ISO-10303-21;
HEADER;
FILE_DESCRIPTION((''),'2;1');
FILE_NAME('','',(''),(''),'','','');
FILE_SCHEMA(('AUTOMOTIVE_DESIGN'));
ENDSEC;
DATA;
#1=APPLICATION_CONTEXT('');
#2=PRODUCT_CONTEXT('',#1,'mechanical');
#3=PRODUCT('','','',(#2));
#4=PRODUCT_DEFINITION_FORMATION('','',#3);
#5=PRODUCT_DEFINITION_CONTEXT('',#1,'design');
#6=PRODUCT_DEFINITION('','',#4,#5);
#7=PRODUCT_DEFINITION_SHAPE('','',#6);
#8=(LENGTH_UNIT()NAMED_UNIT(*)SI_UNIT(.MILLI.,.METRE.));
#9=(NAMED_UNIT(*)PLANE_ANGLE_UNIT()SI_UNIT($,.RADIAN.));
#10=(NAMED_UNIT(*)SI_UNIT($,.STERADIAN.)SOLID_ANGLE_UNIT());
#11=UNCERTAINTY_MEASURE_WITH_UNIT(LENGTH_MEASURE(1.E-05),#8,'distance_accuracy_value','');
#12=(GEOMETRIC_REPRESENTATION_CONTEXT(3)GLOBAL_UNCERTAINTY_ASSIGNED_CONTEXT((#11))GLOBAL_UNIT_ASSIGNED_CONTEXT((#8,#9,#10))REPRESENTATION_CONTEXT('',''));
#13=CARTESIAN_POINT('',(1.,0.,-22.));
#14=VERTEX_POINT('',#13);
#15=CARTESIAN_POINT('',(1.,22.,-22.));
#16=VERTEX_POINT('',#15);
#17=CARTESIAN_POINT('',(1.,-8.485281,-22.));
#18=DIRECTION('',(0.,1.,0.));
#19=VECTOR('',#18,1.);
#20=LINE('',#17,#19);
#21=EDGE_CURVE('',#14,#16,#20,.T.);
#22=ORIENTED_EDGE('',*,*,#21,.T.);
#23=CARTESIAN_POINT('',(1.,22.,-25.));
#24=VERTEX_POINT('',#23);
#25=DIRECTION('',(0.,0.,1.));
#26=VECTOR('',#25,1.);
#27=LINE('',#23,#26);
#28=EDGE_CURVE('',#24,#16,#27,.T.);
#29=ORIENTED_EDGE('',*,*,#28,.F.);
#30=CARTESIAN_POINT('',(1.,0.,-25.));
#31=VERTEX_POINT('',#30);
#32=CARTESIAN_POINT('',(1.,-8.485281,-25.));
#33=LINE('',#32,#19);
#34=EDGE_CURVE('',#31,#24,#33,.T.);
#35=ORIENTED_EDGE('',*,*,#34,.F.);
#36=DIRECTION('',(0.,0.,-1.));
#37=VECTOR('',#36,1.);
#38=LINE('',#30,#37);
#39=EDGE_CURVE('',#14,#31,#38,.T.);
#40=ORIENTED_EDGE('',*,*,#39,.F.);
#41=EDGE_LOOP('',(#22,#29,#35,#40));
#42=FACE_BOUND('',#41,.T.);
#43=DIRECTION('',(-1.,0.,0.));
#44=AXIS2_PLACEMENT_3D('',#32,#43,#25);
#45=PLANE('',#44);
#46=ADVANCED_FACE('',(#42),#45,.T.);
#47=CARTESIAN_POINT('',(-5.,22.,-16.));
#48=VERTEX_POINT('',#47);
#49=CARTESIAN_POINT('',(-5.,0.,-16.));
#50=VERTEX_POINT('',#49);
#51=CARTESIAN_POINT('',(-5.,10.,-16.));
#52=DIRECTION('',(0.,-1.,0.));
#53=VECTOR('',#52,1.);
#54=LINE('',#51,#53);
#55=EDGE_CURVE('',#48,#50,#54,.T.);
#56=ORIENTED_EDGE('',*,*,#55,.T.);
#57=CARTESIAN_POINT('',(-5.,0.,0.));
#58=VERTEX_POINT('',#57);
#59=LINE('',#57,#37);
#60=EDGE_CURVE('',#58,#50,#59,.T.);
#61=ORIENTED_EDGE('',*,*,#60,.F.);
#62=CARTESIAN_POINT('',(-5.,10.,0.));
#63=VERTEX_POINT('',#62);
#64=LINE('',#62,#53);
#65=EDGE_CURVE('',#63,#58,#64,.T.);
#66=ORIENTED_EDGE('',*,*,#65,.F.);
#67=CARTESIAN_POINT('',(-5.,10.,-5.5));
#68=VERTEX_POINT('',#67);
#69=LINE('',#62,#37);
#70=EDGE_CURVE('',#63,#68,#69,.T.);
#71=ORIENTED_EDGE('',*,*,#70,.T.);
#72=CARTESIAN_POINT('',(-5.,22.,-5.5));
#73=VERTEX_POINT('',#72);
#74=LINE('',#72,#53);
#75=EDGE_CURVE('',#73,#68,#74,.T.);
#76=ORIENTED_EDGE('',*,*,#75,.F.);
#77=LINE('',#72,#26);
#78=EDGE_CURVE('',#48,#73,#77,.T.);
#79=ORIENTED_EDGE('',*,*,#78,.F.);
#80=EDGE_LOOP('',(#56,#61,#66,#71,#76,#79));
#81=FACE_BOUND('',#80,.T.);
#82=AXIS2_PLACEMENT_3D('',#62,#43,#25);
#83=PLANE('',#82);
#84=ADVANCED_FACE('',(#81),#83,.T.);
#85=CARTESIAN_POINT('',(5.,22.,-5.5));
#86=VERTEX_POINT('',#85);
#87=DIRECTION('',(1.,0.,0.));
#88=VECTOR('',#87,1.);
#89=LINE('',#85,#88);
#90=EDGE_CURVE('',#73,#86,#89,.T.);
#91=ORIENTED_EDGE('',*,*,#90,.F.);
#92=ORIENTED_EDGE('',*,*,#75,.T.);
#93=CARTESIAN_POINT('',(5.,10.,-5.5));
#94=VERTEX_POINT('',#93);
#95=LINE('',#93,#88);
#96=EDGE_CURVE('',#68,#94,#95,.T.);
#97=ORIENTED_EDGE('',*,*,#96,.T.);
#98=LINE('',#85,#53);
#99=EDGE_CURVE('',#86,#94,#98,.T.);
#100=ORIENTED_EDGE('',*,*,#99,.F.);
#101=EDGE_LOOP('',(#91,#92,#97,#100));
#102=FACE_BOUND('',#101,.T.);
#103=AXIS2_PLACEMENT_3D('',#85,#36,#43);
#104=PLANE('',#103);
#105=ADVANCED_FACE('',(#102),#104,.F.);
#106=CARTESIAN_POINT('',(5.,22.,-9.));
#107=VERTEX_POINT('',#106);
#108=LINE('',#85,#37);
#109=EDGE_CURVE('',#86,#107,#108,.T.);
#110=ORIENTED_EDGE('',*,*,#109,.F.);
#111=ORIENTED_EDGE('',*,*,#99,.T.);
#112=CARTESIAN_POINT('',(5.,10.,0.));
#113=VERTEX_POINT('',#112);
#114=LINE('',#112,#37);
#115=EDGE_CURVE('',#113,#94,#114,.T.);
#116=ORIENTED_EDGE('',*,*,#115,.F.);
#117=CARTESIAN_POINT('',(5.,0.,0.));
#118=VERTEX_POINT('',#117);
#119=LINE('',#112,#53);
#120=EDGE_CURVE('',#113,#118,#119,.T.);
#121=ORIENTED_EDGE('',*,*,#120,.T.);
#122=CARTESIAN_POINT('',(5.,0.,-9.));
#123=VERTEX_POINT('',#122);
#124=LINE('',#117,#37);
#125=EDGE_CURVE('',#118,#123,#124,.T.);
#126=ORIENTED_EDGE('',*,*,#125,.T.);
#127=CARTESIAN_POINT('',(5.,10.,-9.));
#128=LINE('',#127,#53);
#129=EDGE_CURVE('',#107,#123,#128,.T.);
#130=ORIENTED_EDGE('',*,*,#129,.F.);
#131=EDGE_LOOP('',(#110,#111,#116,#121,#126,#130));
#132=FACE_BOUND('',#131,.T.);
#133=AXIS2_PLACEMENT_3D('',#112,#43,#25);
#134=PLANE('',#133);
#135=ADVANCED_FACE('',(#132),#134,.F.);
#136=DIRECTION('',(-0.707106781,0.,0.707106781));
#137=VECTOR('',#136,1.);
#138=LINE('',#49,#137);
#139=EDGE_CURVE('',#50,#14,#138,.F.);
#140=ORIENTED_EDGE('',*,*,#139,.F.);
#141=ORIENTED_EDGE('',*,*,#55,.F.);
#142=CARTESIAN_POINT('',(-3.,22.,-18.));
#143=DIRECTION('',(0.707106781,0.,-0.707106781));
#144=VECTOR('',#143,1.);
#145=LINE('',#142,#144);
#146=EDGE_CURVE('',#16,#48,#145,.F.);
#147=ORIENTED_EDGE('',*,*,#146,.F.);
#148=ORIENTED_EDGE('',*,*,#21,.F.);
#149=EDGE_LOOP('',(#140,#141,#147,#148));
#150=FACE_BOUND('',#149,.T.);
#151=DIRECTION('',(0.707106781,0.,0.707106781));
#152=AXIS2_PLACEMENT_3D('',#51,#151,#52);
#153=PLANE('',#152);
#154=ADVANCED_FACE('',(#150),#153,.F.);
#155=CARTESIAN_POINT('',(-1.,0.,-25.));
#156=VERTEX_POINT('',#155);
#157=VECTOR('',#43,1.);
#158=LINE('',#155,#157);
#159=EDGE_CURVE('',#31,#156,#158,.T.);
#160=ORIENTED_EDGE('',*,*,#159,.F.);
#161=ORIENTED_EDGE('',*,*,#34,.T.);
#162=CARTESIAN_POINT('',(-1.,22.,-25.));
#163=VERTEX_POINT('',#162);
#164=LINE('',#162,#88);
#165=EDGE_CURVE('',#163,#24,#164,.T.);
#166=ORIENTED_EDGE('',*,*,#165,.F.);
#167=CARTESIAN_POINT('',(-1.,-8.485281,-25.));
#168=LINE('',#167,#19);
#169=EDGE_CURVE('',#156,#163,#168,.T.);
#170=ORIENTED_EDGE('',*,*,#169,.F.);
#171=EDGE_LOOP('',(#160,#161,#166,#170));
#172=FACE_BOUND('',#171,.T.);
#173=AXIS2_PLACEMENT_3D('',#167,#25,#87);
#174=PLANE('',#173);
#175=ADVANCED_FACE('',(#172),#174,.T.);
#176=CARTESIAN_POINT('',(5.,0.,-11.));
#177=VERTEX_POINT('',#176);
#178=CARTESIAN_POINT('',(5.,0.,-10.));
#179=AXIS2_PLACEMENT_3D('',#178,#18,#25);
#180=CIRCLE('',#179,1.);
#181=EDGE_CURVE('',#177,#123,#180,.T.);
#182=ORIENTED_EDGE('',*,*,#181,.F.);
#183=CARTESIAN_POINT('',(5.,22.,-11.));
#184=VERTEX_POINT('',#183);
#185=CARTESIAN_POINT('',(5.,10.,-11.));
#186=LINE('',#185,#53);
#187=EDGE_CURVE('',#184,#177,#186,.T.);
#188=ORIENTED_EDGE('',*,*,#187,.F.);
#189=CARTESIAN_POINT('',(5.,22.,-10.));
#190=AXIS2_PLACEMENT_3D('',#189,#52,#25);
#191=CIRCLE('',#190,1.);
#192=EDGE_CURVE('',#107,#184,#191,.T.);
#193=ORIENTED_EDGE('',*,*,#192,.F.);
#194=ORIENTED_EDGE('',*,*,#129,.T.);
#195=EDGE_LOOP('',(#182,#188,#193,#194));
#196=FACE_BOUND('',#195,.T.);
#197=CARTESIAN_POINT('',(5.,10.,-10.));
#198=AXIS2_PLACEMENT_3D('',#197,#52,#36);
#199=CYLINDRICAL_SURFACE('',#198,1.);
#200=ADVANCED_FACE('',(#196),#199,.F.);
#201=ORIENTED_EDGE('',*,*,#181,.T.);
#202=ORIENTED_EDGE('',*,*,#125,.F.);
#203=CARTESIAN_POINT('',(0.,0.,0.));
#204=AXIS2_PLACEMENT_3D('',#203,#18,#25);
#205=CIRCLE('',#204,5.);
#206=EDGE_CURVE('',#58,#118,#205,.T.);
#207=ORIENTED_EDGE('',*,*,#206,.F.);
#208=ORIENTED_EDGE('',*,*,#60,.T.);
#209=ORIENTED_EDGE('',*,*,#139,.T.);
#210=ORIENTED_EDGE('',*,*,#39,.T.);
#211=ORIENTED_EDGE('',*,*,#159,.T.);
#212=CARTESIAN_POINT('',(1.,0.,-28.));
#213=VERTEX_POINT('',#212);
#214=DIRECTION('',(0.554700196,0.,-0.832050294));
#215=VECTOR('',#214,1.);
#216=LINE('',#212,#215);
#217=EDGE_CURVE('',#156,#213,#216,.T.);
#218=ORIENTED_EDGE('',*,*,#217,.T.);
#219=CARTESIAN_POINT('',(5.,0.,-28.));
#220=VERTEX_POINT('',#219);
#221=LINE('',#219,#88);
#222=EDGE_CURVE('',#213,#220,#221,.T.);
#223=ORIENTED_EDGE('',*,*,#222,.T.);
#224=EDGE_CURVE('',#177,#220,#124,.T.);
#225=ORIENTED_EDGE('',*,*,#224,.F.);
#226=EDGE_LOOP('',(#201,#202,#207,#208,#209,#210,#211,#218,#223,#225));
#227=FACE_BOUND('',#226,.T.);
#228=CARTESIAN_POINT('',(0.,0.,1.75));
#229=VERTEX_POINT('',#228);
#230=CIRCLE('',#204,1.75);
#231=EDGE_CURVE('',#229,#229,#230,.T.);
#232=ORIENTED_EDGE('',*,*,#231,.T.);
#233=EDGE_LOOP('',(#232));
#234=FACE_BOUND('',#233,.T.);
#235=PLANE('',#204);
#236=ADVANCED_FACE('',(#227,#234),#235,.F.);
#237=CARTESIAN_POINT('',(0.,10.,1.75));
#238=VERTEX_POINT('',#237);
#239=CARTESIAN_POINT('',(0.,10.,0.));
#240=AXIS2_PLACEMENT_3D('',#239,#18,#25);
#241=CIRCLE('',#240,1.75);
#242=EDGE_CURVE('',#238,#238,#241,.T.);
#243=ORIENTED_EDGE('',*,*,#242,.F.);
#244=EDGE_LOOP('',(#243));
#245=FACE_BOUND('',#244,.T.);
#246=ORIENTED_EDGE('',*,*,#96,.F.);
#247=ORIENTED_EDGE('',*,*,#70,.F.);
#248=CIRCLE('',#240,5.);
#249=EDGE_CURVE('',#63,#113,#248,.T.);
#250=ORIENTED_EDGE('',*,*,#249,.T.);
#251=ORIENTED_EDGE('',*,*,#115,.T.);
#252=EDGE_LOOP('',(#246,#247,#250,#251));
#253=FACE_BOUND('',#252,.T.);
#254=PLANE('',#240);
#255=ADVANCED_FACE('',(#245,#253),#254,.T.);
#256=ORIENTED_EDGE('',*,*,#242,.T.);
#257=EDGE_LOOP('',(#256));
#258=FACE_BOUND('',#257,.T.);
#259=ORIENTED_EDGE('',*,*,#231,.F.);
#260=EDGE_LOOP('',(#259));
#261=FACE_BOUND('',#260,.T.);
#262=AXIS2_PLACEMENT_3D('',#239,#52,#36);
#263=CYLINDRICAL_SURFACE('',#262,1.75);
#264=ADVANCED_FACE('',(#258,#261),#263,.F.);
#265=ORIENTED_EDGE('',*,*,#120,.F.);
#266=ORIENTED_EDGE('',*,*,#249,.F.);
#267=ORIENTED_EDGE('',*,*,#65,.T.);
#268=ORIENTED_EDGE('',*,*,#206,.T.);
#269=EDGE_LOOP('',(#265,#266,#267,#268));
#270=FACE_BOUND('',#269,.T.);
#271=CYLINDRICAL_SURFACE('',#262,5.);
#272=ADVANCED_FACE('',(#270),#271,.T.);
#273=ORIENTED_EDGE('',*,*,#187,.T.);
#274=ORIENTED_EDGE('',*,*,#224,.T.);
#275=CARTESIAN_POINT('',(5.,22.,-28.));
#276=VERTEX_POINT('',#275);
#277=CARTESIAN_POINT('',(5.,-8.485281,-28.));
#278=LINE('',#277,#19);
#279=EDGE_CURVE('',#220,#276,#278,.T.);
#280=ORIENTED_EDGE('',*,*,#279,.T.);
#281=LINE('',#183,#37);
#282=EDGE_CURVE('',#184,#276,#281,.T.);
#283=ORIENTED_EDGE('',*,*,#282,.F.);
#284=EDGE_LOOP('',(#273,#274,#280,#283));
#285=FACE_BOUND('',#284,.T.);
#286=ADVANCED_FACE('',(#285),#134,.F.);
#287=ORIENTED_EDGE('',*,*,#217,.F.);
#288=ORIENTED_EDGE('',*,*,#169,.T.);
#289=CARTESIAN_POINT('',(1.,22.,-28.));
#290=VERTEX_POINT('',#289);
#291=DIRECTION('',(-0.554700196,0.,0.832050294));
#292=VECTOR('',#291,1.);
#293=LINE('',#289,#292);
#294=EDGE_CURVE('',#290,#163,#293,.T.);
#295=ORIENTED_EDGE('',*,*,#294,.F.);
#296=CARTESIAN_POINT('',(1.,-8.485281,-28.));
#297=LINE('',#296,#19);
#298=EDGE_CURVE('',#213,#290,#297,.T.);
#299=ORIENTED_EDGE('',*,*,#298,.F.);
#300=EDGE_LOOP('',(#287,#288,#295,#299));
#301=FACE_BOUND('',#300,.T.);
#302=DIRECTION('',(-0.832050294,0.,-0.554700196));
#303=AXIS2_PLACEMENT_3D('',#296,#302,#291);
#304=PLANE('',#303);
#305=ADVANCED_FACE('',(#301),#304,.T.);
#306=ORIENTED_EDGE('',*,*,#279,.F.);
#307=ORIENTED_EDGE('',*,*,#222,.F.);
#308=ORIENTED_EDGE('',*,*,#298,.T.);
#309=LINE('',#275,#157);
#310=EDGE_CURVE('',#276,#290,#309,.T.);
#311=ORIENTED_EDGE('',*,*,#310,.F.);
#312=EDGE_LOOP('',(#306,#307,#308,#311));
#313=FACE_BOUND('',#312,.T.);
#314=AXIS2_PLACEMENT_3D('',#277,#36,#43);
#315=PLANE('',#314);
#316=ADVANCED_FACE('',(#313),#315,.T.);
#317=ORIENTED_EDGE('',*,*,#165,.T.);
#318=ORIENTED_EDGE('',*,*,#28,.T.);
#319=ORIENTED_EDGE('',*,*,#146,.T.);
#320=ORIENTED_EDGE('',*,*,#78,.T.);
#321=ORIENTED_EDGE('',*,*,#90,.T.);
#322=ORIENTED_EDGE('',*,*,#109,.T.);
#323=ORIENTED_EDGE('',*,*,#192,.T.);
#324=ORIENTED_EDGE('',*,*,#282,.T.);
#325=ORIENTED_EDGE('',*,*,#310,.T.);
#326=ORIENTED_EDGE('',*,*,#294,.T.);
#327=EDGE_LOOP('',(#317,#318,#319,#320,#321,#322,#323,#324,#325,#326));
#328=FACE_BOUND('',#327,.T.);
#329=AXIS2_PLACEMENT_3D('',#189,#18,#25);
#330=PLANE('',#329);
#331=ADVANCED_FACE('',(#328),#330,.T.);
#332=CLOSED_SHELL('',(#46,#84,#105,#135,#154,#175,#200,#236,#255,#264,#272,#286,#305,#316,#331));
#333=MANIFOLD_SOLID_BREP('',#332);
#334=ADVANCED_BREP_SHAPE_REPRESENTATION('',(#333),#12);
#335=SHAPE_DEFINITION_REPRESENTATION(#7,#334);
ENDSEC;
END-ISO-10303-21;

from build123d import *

# Parameters (mm, degrees)
SKETCH1_R           = 1.75
BOSS_EXTRUDE1_DEPTH = 10
BOSS_EXTRUDE2_DEPTH = 12
BOSS_EXTRUDE3_DEPTH = 22
CHAMFER1_SIZE       = 6


with BuildPart() as part:
    # Sketch1 → Boss-Extrude1 (new body)
    with BuildSketch(Plane(origin=(0, 0, 0), x_dir=(1, 0, 0), z_dir=(0, 1, 0))):
        with BuildLine():
            Line((-5, 22), (-5, 0))
            ThreePointArc((-5, 0), (0, -5), (5, 0))
            Line((5, 0), (5, 9))
            ThreePointArc((5, 9), (4, 10), (5, 11))
            Line((5, 11), (5, 22))
            Line((5, 22), (-5, 22))
        make_face()
        with Locations(Location((0, 0, 0), (0, 0, 270))):
            Circle(SKETCH1_R, mode=Mode.SUBTRACT)
    extrude(amount=BOSS_EXTRUDE1_DEPTH)

    # Sketch3 → Boss-Extrude2 (add)
    with BuildSketch(Plane(origin=(0, 10, 0), x_dir=(1, 0, 0), z_dir=(0, 1, 0))):
        with BuildLine():
            Line((5, 5.5), (-5, 5.5))
            Line((-5, 5.5), (-5, 22))
            Line((-5, 22), (5, 22))
            Line((5, 22), (5, 11))
            ThreePointArc((5, 11), (4, 10), (5, 9))
            Line((5, 9), (5, 5.5))
        make_face()
    extrude(amount=BOSS_EXTRUDE2_DEPTH)

    # Sketch5 → Boss-Extrude3 (add)
    with BuildSketch(Plane(origin=(0, 22, 0), x_dir=(1, 0, 0), z_dir=(0, 1, 0))):
        Polygon((5, 22), (5, 28), (1, 28), (-1, 25), (1, 25), (1, 22), align=None)
    extrude(amount=-BOSS_EXTRUDE3_DEPTH)

    # Chamfer1
    chamfer1_edges = [part.edges().sort_by_distance(p)[0] for p in [
        (-5, 11, -22),
    ]]
    chamfer(chamfer1_edges, length=CHAMFER1_SIZE - 0.0001)  # a hair under: the kernel refuses the full size


solid = part.part
